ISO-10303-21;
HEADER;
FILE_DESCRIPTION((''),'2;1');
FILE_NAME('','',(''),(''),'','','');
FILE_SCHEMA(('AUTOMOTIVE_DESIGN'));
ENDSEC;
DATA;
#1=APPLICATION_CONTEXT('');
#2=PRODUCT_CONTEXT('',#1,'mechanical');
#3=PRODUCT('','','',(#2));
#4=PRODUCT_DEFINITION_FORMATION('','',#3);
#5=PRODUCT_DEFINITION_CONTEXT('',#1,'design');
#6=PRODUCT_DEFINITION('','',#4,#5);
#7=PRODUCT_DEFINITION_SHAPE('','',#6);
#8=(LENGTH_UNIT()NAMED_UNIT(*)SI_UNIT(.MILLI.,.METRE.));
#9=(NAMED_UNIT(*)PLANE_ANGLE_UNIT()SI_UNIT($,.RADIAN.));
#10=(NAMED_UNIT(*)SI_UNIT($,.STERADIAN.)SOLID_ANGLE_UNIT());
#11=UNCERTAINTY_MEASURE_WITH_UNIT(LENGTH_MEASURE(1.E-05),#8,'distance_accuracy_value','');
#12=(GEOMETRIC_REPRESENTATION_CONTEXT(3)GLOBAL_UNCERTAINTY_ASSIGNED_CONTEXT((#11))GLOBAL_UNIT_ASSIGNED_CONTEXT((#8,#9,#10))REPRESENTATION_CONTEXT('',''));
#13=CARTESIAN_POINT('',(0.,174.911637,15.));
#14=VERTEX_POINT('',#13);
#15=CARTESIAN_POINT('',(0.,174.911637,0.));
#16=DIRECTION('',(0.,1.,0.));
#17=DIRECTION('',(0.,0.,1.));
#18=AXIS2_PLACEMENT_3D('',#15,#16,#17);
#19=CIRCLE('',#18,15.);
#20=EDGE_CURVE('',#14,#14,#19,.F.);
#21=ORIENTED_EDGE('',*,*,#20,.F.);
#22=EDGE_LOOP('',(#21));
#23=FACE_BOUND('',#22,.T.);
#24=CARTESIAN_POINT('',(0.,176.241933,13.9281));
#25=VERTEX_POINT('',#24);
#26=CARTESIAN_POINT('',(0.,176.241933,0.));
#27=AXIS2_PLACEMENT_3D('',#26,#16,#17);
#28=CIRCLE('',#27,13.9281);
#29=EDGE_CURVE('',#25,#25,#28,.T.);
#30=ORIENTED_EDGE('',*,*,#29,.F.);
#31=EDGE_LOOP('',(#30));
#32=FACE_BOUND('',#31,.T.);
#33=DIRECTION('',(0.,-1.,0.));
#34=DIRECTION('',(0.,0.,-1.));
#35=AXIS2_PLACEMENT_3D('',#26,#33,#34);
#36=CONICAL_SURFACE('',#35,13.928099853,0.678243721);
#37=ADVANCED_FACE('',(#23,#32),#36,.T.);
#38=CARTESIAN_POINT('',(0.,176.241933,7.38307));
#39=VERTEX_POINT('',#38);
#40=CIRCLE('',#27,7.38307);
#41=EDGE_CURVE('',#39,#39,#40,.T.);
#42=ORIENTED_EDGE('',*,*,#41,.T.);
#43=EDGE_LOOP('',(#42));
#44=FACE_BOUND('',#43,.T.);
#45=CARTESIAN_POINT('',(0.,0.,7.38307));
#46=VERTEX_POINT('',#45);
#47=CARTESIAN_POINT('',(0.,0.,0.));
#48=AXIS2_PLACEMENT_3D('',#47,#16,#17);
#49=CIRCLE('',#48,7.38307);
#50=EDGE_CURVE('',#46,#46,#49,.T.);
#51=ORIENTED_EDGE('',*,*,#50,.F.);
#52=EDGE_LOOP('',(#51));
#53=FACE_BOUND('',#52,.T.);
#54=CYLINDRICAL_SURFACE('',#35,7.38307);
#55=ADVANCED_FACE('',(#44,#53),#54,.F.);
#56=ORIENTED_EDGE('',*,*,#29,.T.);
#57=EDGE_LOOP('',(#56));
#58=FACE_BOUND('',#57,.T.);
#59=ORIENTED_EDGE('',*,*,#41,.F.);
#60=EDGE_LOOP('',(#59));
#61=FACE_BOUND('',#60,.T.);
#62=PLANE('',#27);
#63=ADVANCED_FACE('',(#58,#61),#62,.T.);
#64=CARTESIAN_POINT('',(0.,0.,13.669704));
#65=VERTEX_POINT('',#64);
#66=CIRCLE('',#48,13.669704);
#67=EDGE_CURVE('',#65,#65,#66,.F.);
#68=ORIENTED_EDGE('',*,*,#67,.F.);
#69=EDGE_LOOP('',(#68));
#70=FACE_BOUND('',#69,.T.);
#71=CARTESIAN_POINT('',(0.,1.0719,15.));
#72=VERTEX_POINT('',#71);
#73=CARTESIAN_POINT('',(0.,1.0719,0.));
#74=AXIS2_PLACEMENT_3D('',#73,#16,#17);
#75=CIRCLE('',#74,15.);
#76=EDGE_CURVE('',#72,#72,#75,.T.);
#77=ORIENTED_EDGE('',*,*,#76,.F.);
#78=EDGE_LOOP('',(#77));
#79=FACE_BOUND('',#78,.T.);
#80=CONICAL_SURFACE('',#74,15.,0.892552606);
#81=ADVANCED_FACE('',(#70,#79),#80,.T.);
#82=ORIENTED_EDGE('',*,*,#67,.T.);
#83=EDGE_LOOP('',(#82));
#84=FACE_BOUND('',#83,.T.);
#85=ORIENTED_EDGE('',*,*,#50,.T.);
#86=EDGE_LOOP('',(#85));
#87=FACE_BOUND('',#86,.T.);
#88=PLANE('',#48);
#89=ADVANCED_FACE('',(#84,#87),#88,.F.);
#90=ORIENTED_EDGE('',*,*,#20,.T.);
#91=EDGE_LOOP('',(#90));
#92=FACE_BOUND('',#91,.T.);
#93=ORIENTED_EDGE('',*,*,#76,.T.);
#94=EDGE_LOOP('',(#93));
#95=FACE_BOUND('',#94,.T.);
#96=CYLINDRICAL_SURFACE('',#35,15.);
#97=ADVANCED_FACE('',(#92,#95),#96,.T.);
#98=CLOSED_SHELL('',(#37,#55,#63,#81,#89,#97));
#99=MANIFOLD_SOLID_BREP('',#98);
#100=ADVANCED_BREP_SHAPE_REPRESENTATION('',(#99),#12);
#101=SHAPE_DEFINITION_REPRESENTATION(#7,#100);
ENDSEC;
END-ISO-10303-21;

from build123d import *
from OCP.BRepFilletAPI import BRepFilletAPI_MakeChamfer

# Parameters (mm, degrees)
SKETCH1_R           = 15
BOSS_EXTRUDE1_DEPTH = 176.241932532
SKETCH2_R           = 7.383069666
CUT_EXTRUDE1_DEPTH  = 178.513996019
CHAMFER1_SIZE       = 1.330295849
CHAMFER1_SIZE2      = 1.071900147


with BuildPart() as part:
    # Sketch1 → Boss-Extrude1 (new body)
    with BuildSketch(Plane(origin=(0, 0, 0), x_dir=(1, 0, 0), z_dir=(0, 1, 0))):
        Circle(SKETCH1_R)
    extrude(amount=BOSS_EXTRUDE1_DEPTH)

    # Sketch2 → Cut-Extrude1 (cut, through all)
    with BuildSketch(Plane(origin=(0, 0, 0), x_dir=(1, 0, 0), z_dir=(0, 1, 0))):
        Circle(SKETCH2_R)
    extrude(amount=CUT_EXTRUDE1_DEPTH, mode=Mode.SUBTRACT)

    # Chamfer1: one chamfer whose edges measure the first distance from different faces: ONE call of the kernel's chamfer builder (chamfer() names one face for all edges)
    chamfer1_edges_1 = [part.edges().sort_by_distance(p)[0] for p in [
        (-15, 176.241932532, 0),
    ]]
    chamfer1_side_1 = [part.faces().sort_by_distance(p)[0] for p in [
        (-15, 88.120966266, 0),
    ]]
    chamfer1_edges_2 = [part.edges().sort_by_distance(p)[0] for p in [
        (-15, 0, 0),
    ]]
    chamfer1_side_2 = [part.faces().sort_by_distance(p)[0] for p in [
        (-14.575735931, 0, 0),
    ]]
    chamfer1 = BRepFilletAPI_MakeChamfer(part.part.solid().wrapped)
    for e in chamfer1_edges_1:
        chamfer1.Add(CHAMFER1_SIZE, CHAMFER1_SIZE2, e.wrapped, chamfer1_side_1[0].wrapped)  # the first distance lies on this face
    for e in chamfer1_edges_2:
        chamfer1.Add(CHAMFER1_SIZE, CHAMFER1_SIZE2, e.wrapped, chamfer1_side_2[0].wrapped)  # the first distance lies on this face
    add(Compound.cast(chamfer1.Shape()), mode=Mode.REPLACE)


solid = part.part
